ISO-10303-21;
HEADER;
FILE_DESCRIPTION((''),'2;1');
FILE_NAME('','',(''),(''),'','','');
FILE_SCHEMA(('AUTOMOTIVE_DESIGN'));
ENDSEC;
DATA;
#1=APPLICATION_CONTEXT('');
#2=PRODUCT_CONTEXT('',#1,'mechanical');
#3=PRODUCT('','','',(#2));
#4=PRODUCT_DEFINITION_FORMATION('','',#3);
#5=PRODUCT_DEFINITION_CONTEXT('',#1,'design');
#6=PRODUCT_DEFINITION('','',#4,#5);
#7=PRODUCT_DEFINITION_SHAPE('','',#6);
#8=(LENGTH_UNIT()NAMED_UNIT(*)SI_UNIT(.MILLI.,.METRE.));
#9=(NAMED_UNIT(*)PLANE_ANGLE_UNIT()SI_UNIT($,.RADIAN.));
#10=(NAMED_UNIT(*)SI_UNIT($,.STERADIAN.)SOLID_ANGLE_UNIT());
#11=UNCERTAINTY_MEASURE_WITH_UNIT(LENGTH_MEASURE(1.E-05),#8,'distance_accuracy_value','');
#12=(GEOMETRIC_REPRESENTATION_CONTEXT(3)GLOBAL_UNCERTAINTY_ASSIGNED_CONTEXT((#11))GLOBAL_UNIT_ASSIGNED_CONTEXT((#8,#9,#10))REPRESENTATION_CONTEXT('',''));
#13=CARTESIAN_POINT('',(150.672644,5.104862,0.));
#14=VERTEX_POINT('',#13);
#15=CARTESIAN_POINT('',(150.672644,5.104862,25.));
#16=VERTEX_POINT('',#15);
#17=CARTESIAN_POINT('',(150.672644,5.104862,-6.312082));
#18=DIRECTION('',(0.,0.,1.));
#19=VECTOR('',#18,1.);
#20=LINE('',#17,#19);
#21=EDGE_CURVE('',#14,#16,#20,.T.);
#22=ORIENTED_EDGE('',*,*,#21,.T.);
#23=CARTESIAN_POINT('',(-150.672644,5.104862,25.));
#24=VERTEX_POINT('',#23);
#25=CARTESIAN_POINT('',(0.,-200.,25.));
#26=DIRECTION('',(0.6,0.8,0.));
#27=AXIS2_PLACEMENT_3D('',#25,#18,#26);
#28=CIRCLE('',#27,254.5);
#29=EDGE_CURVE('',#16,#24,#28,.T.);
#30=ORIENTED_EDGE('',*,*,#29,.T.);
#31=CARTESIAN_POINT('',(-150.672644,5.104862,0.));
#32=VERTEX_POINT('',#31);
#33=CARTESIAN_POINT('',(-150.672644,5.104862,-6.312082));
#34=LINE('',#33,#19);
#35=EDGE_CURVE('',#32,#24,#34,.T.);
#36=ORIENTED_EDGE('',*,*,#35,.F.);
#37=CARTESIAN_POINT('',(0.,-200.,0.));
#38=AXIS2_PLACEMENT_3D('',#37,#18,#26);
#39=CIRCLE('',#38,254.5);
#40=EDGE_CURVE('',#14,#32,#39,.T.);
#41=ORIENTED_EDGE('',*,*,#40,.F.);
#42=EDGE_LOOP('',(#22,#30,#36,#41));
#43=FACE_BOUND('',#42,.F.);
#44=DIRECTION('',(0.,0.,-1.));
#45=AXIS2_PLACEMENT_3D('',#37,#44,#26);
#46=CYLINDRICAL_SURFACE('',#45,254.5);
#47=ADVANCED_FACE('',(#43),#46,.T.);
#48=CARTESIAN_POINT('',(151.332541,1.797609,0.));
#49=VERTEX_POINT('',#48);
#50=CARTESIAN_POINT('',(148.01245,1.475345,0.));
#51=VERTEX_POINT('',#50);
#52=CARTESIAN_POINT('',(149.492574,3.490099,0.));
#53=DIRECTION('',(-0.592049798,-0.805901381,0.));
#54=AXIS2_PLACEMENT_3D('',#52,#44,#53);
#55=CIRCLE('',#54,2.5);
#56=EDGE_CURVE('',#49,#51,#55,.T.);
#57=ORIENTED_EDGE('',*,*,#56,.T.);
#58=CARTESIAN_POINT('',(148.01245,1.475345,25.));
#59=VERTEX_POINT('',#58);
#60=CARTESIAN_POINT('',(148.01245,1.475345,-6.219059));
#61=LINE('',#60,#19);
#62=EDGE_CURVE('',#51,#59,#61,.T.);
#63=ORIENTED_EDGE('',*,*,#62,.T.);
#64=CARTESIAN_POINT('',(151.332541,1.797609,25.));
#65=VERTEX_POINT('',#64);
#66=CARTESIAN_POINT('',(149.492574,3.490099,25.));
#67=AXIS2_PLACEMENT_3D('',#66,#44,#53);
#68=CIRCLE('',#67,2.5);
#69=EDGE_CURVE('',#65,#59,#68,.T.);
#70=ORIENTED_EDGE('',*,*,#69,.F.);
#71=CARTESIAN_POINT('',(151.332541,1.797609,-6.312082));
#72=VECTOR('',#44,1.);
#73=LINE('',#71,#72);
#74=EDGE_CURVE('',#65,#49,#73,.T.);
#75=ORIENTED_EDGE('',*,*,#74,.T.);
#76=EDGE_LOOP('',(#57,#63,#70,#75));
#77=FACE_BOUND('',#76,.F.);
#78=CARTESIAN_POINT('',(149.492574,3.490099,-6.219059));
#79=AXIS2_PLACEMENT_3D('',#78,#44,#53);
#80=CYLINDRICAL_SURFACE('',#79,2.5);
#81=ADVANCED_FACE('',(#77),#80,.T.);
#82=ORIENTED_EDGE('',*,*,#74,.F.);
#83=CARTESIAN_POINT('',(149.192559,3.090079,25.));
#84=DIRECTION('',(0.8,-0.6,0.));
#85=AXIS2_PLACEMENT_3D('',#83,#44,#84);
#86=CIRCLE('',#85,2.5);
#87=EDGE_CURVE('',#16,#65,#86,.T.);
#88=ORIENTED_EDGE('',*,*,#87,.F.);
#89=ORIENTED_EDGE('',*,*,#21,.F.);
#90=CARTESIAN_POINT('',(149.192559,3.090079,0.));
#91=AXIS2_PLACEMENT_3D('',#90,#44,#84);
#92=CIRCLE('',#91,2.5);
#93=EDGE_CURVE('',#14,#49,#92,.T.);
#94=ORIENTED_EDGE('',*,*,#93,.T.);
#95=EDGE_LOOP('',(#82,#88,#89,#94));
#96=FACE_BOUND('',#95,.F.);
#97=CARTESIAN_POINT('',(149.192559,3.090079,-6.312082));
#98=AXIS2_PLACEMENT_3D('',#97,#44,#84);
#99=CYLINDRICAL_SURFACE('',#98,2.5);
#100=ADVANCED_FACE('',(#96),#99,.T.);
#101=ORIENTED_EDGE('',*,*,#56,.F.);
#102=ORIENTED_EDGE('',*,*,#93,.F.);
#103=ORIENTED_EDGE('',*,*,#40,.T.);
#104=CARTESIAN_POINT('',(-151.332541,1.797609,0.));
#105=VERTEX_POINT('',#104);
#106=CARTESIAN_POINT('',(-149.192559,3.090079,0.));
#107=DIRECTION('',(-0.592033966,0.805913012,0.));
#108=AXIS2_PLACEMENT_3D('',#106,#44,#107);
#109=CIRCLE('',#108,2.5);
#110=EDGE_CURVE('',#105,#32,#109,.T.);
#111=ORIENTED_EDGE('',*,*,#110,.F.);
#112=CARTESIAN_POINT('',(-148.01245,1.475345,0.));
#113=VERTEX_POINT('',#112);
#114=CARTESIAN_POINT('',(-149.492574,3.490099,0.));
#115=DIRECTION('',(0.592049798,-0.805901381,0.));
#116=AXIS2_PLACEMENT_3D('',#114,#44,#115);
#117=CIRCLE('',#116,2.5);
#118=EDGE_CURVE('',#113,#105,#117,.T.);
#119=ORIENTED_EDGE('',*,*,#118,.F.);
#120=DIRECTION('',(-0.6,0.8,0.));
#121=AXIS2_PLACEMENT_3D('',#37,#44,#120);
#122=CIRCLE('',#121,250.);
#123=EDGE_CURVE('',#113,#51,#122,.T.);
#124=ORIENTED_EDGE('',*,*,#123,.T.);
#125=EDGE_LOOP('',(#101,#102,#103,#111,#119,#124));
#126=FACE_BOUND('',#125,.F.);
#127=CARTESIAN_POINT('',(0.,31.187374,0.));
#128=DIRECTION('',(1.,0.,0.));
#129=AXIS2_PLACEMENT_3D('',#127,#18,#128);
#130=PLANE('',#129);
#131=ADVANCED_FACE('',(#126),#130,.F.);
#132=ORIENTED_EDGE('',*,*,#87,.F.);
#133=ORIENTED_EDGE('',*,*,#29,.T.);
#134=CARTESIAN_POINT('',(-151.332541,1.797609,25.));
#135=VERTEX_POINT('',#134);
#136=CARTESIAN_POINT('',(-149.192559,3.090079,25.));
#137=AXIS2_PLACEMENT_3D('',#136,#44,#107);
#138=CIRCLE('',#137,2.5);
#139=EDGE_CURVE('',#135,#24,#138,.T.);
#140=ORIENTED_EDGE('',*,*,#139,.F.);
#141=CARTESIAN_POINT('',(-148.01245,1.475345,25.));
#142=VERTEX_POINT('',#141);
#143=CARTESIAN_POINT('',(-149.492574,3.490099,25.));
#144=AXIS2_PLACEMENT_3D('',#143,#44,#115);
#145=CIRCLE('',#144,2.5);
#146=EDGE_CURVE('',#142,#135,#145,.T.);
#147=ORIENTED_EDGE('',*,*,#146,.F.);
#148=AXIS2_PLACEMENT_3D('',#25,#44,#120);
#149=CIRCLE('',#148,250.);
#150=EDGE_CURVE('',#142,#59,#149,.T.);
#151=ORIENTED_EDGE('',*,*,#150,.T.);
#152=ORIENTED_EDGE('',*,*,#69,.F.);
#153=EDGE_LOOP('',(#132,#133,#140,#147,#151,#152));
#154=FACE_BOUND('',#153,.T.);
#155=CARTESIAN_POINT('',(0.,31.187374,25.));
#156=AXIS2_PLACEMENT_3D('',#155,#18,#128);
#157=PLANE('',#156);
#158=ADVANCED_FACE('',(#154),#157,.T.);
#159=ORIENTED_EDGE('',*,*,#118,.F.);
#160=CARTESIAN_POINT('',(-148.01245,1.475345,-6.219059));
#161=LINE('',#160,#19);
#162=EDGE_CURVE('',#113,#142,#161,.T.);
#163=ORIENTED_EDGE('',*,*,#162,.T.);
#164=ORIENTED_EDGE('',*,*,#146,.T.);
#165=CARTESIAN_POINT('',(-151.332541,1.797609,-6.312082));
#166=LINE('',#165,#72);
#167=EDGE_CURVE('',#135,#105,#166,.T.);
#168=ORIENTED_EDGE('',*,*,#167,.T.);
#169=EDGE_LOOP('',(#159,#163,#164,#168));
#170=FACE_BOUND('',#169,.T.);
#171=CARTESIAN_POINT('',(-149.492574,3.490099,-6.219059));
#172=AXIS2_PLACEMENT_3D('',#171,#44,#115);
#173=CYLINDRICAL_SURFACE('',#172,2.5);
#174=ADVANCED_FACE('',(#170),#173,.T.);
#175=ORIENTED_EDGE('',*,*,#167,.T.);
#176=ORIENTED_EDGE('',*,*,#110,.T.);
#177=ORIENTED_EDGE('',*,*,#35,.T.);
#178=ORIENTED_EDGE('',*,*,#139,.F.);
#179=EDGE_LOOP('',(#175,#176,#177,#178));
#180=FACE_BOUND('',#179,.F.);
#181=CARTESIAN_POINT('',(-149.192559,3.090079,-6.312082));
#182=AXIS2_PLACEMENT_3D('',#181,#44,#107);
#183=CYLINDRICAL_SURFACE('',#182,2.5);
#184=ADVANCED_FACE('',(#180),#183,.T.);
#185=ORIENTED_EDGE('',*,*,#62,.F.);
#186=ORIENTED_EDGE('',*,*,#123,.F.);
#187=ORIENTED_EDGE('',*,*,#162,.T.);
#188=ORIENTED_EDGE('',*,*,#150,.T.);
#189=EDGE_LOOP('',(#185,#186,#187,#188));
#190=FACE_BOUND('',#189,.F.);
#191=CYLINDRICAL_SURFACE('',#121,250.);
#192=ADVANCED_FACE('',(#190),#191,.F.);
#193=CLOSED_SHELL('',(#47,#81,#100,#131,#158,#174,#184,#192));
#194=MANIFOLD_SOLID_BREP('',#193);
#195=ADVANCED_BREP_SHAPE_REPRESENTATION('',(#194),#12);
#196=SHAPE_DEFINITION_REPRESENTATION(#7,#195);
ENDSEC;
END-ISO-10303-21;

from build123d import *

# Parameters (mm, degrees)
F1_DEPTH    = 25
F2_T1_DEPTH = 37.6241632485
F2_T3_DEPTH = 37.4381172953


# Not quite as in the source:
# - a fillet or chamfer that OpenCascade refuses, or shapes differently, is made with other operations: its cross-section is extruded or revolved along the edge and cut away or added


with BuildPart() as f1:
    # F0 (on Top) → F1 (new body)
    with BuildSketch(Plane.XY):
        with BuildLine():
            ThreePointArc((-150, 0), (0, 50), (150, 0))
            Line((150, 0), (152.7, 3.6))
            ThreePointArc((152.7, 3.6), (0, 54.5), (-152.7, 3.6))
            Line((-152.7, 3.6), (-150, 0))
        make_face()
    extrude(amount=F1_DEPTH)

    # F2: fillet of radius 2.5 on 4 edges, made by hand

    # F2_s2 → F2_t1 (cut)
    with BuildSketch(Plane.XY.offset(-6.3120816242)):
        with BuildLine():
            ThreePointArc((-150.6726442548, 5.1048616519), (-151.6656488685, 3.4559044723), (-151.1925593407, 1.590079121))
            Line((-151.1925593407, 1.590079121), (-152.7, 3.6))
            ThreePointArc((-152.7, 3.6), (-151.6881883097, 4.3549449544), (-150.6726442548, 5.1048616519))
        make_face()
        with BuildLine():
            ThreePointArc((151.1925593407, 1.590079121), (151.6656488685, 3.4559044723), (150.6726442548, 5.1048616519))
            ThreePointArc((150.6726442548, 5.1048616519), (151.6881883097, 4.3549449544), (152.7, 3.6))
            Line((152.7, 3.6), (151.1925593407, 1.590079121))
        make_face()
    extrude(amount=F2_T1_DEPTH, mode=Mode.SUBTRACT)

    # F2_s4 → F2_t3 (cut)
    with BuildSketch(Plane.XY.offset(-6.2190586476)):
        with BuildLine():
            ThreePointArc((-148.0124495796, 1.4753453141), (-149.8583751339, 1.0170056461), (-151.4925740754, 1.9900987672))
            Line((-151.4925740754, 1.9900987672), (-150, 0))
            ThreePointArc((-150, 0), (-149.0080507458, 0.7401325419), (-148.0124495796, 1.4753453141))
        make_face()
        with BuildLine():
            ThreePointArc((148.0124495796, 1.4753453141), (149.8583751339, 1.0170056461), (151.4925740754, 1.9900987672))
            Line((151.4925740754, 1.9900987672), (150, 0))
            ThreePointArc((150, 0), (149.0080507458, 0.7401325419), (148.0124495796, 1.4753453141))
        make_face()
    extrude(amount=F2_T3_DEPTH, mode=Mode.SUBTRACT)


solid = f1.part
